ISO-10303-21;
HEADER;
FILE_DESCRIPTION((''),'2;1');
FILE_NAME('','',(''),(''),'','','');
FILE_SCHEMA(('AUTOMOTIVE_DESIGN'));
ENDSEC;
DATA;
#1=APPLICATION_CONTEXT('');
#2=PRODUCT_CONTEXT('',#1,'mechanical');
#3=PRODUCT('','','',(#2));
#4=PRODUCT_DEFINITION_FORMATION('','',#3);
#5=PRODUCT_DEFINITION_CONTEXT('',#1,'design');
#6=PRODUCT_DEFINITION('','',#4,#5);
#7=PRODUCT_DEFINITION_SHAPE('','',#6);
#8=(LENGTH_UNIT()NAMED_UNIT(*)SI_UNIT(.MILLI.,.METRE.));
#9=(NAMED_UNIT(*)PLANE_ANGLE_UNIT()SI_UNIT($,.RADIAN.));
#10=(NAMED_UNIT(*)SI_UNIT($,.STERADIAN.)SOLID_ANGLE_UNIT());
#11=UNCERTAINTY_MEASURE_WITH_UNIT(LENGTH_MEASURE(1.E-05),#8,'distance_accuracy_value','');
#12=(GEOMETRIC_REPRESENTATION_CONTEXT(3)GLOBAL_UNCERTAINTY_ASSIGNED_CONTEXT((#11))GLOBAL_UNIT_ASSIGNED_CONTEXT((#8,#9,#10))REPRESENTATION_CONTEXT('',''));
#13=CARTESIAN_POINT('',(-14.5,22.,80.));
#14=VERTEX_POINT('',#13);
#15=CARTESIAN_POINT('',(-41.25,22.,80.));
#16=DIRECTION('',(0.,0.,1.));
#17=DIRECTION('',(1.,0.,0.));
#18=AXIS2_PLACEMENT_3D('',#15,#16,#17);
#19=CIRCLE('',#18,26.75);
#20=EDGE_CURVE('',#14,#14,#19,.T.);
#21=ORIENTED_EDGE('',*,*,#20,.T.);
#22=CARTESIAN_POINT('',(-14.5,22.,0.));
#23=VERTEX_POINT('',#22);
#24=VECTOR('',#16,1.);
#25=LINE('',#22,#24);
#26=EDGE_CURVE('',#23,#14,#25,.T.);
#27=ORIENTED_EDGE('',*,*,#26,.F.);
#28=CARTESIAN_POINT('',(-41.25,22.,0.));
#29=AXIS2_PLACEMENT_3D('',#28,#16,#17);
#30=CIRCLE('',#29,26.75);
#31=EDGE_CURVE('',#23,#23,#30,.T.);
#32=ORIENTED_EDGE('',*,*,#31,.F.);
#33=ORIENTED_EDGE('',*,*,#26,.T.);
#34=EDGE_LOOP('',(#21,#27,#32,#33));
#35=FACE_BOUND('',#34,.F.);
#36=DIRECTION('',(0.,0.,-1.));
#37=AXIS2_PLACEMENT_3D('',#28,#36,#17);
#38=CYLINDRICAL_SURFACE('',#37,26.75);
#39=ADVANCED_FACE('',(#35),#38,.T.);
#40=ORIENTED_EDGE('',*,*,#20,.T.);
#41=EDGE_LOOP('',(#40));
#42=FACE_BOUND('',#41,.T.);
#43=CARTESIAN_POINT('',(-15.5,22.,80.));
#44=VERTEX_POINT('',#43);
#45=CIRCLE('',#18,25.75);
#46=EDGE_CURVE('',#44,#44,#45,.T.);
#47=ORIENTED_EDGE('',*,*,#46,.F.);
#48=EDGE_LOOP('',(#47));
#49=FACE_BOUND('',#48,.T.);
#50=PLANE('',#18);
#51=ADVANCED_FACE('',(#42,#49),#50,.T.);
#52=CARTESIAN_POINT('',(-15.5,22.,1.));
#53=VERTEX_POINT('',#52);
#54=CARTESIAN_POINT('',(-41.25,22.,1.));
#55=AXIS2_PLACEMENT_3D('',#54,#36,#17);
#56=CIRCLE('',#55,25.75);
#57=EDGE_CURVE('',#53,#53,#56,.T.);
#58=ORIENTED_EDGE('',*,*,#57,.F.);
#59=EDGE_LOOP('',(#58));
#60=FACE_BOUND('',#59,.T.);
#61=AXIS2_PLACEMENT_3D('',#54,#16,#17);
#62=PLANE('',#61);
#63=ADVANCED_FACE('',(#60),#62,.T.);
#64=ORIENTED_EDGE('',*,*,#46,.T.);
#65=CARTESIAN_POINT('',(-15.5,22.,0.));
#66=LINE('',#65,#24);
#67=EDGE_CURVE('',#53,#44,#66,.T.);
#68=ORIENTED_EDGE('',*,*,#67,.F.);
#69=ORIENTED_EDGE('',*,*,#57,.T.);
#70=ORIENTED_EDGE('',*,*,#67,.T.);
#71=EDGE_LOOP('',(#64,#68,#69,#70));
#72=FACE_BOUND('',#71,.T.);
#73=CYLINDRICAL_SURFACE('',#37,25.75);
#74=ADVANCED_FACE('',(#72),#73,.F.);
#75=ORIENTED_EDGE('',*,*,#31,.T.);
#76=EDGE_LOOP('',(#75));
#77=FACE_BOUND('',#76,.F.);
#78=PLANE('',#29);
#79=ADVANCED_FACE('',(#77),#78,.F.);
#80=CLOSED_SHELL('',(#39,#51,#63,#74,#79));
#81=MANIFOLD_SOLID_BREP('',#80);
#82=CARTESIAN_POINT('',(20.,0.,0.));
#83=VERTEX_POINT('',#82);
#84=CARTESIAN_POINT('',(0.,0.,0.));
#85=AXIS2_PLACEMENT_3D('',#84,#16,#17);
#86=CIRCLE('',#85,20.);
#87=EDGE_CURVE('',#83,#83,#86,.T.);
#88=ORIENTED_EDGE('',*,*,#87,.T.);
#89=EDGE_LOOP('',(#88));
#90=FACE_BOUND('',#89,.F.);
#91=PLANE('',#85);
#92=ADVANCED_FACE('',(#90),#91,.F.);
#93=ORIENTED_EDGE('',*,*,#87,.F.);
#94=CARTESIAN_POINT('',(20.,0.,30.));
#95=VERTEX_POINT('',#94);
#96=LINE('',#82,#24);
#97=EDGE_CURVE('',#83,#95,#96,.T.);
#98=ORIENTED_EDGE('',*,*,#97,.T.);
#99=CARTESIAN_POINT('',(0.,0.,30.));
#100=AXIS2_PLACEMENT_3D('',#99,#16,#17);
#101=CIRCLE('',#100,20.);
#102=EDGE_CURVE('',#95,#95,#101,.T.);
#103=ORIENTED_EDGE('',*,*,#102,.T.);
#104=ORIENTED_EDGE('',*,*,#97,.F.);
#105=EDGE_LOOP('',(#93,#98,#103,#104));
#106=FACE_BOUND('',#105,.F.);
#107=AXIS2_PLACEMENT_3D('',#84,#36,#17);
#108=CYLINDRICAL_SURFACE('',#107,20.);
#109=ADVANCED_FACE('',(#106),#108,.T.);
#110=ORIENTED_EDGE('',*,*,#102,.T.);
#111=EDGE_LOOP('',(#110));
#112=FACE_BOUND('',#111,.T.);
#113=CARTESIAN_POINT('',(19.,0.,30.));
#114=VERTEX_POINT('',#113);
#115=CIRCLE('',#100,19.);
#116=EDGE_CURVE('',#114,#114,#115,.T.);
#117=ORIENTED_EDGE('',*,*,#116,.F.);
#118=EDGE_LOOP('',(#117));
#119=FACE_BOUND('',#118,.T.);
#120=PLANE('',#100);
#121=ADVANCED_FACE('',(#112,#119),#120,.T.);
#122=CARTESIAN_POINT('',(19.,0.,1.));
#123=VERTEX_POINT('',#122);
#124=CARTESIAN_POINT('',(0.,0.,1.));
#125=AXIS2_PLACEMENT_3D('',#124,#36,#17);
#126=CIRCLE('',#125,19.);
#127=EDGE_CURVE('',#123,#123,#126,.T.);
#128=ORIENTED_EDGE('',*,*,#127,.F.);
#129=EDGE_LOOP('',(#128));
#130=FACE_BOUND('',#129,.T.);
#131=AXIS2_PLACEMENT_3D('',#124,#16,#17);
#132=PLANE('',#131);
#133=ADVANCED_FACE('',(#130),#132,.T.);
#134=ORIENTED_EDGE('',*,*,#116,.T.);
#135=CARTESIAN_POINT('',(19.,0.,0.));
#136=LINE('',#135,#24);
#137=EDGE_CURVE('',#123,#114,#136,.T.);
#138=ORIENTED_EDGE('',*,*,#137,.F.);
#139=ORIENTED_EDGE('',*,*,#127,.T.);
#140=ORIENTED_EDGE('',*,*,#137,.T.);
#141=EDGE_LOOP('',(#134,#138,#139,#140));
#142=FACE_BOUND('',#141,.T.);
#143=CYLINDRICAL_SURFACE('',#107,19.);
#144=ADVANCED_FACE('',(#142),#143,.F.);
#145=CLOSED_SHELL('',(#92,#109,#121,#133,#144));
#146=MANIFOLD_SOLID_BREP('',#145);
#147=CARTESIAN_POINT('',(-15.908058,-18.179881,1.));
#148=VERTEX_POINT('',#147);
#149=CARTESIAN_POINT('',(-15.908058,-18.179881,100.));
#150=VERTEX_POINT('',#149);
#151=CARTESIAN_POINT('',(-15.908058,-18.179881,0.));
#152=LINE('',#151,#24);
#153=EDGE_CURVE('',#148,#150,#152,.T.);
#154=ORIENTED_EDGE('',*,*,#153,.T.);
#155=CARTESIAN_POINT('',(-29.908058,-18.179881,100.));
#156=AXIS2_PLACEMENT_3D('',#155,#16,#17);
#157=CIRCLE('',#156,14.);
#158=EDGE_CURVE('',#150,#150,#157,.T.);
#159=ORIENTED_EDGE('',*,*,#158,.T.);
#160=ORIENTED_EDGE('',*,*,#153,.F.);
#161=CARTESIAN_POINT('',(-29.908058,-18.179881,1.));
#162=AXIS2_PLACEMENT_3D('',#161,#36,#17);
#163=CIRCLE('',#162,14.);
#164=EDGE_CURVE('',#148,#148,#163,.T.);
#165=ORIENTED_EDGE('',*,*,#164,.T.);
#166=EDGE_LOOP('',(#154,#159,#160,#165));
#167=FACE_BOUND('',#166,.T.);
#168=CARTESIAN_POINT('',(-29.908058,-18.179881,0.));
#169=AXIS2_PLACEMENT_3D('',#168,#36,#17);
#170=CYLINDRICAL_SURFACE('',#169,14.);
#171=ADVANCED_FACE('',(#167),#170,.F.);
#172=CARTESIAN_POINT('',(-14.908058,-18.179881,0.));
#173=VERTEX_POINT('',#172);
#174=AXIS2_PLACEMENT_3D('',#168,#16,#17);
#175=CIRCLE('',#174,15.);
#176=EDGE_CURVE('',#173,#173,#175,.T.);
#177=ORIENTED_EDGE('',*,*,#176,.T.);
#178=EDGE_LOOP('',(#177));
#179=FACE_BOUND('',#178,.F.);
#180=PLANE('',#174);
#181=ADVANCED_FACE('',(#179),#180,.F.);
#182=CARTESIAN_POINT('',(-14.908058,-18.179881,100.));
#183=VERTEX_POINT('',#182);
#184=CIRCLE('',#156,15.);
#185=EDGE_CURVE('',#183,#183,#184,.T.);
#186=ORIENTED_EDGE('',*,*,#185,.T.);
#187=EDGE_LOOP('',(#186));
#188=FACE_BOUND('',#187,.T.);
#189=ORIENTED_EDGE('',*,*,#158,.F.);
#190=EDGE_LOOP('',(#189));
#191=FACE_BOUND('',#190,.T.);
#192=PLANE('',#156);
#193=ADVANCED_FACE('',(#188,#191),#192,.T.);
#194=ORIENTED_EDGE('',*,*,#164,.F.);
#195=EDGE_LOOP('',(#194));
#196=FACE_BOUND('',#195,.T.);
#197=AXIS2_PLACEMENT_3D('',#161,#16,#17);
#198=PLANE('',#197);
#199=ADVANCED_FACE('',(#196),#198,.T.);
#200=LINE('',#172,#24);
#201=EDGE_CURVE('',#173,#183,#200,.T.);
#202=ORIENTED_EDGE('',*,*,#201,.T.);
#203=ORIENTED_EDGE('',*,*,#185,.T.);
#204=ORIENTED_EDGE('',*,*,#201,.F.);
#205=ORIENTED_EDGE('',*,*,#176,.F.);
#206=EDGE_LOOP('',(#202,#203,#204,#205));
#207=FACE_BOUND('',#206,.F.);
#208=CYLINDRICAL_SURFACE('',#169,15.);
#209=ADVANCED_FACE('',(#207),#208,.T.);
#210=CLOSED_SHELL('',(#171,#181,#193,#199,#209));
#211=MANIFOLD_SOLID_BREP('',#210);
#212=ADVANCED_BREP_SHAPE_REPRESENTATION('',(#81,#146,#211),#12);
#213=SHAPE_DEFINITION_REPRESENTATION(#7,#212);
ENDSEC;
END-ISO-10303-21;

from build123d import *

# Parameters (mm, degrees)
F0_R     = 20
F1_DEPTH = 30
F2_T     = -1
F3_R     = 26.75
F4_DEPTH = 80
F5_T     = -1
F6_R     = 15
F7_DEPTH = 100
F8_T     = -1


with BuildPart() as f1:
    # F0 (on Top) → F1 (new body)
    with BuildSketch(Plane.XY):
        Circle(F0_R)
    extrude(amount=F1_DEPTH)

    # F2
    f2_openings = [f1.faces().sort_by_distance(p)[0] for p in [
        (0, 0, 30),
    ]]
    offset(amount=F2_T, openings=f2_openings)


with BuildPart() as f4:
    # F3 (on Top) → F4 (new body)
    with BuildSketch(Plane.XY):
        with Locations((-41.25, 22)):
            Circle(F3_R)
    extrude(amount=F4_DEPTH)

    # F5
    f5_openings = [f4.faces().sort_by_distance(p)[0] for p in [
        (-41.25, 22, 80),
    ]]
    offset(amount=F5_T, openings=f5_openings)


with BuildPart() as f7:
    # F6 (on Top) → F7 (new body)
    with BuildSketch(Plane.XY):
        with Locations((-29.9080578136, -18.1798811277)):
            Circle(F6_R)
    extrude(amount=F7_DEPTH)

    # F8
    f8_openings = [f7.faces().sort_by_distance(p)[0] for p in [
        (-29.908058, -18.179881, 100),
    ]]
    offset(amount=F8_T, openings=f8_openings)


solid = Compound([f1.part, f4.part, f7.part])
